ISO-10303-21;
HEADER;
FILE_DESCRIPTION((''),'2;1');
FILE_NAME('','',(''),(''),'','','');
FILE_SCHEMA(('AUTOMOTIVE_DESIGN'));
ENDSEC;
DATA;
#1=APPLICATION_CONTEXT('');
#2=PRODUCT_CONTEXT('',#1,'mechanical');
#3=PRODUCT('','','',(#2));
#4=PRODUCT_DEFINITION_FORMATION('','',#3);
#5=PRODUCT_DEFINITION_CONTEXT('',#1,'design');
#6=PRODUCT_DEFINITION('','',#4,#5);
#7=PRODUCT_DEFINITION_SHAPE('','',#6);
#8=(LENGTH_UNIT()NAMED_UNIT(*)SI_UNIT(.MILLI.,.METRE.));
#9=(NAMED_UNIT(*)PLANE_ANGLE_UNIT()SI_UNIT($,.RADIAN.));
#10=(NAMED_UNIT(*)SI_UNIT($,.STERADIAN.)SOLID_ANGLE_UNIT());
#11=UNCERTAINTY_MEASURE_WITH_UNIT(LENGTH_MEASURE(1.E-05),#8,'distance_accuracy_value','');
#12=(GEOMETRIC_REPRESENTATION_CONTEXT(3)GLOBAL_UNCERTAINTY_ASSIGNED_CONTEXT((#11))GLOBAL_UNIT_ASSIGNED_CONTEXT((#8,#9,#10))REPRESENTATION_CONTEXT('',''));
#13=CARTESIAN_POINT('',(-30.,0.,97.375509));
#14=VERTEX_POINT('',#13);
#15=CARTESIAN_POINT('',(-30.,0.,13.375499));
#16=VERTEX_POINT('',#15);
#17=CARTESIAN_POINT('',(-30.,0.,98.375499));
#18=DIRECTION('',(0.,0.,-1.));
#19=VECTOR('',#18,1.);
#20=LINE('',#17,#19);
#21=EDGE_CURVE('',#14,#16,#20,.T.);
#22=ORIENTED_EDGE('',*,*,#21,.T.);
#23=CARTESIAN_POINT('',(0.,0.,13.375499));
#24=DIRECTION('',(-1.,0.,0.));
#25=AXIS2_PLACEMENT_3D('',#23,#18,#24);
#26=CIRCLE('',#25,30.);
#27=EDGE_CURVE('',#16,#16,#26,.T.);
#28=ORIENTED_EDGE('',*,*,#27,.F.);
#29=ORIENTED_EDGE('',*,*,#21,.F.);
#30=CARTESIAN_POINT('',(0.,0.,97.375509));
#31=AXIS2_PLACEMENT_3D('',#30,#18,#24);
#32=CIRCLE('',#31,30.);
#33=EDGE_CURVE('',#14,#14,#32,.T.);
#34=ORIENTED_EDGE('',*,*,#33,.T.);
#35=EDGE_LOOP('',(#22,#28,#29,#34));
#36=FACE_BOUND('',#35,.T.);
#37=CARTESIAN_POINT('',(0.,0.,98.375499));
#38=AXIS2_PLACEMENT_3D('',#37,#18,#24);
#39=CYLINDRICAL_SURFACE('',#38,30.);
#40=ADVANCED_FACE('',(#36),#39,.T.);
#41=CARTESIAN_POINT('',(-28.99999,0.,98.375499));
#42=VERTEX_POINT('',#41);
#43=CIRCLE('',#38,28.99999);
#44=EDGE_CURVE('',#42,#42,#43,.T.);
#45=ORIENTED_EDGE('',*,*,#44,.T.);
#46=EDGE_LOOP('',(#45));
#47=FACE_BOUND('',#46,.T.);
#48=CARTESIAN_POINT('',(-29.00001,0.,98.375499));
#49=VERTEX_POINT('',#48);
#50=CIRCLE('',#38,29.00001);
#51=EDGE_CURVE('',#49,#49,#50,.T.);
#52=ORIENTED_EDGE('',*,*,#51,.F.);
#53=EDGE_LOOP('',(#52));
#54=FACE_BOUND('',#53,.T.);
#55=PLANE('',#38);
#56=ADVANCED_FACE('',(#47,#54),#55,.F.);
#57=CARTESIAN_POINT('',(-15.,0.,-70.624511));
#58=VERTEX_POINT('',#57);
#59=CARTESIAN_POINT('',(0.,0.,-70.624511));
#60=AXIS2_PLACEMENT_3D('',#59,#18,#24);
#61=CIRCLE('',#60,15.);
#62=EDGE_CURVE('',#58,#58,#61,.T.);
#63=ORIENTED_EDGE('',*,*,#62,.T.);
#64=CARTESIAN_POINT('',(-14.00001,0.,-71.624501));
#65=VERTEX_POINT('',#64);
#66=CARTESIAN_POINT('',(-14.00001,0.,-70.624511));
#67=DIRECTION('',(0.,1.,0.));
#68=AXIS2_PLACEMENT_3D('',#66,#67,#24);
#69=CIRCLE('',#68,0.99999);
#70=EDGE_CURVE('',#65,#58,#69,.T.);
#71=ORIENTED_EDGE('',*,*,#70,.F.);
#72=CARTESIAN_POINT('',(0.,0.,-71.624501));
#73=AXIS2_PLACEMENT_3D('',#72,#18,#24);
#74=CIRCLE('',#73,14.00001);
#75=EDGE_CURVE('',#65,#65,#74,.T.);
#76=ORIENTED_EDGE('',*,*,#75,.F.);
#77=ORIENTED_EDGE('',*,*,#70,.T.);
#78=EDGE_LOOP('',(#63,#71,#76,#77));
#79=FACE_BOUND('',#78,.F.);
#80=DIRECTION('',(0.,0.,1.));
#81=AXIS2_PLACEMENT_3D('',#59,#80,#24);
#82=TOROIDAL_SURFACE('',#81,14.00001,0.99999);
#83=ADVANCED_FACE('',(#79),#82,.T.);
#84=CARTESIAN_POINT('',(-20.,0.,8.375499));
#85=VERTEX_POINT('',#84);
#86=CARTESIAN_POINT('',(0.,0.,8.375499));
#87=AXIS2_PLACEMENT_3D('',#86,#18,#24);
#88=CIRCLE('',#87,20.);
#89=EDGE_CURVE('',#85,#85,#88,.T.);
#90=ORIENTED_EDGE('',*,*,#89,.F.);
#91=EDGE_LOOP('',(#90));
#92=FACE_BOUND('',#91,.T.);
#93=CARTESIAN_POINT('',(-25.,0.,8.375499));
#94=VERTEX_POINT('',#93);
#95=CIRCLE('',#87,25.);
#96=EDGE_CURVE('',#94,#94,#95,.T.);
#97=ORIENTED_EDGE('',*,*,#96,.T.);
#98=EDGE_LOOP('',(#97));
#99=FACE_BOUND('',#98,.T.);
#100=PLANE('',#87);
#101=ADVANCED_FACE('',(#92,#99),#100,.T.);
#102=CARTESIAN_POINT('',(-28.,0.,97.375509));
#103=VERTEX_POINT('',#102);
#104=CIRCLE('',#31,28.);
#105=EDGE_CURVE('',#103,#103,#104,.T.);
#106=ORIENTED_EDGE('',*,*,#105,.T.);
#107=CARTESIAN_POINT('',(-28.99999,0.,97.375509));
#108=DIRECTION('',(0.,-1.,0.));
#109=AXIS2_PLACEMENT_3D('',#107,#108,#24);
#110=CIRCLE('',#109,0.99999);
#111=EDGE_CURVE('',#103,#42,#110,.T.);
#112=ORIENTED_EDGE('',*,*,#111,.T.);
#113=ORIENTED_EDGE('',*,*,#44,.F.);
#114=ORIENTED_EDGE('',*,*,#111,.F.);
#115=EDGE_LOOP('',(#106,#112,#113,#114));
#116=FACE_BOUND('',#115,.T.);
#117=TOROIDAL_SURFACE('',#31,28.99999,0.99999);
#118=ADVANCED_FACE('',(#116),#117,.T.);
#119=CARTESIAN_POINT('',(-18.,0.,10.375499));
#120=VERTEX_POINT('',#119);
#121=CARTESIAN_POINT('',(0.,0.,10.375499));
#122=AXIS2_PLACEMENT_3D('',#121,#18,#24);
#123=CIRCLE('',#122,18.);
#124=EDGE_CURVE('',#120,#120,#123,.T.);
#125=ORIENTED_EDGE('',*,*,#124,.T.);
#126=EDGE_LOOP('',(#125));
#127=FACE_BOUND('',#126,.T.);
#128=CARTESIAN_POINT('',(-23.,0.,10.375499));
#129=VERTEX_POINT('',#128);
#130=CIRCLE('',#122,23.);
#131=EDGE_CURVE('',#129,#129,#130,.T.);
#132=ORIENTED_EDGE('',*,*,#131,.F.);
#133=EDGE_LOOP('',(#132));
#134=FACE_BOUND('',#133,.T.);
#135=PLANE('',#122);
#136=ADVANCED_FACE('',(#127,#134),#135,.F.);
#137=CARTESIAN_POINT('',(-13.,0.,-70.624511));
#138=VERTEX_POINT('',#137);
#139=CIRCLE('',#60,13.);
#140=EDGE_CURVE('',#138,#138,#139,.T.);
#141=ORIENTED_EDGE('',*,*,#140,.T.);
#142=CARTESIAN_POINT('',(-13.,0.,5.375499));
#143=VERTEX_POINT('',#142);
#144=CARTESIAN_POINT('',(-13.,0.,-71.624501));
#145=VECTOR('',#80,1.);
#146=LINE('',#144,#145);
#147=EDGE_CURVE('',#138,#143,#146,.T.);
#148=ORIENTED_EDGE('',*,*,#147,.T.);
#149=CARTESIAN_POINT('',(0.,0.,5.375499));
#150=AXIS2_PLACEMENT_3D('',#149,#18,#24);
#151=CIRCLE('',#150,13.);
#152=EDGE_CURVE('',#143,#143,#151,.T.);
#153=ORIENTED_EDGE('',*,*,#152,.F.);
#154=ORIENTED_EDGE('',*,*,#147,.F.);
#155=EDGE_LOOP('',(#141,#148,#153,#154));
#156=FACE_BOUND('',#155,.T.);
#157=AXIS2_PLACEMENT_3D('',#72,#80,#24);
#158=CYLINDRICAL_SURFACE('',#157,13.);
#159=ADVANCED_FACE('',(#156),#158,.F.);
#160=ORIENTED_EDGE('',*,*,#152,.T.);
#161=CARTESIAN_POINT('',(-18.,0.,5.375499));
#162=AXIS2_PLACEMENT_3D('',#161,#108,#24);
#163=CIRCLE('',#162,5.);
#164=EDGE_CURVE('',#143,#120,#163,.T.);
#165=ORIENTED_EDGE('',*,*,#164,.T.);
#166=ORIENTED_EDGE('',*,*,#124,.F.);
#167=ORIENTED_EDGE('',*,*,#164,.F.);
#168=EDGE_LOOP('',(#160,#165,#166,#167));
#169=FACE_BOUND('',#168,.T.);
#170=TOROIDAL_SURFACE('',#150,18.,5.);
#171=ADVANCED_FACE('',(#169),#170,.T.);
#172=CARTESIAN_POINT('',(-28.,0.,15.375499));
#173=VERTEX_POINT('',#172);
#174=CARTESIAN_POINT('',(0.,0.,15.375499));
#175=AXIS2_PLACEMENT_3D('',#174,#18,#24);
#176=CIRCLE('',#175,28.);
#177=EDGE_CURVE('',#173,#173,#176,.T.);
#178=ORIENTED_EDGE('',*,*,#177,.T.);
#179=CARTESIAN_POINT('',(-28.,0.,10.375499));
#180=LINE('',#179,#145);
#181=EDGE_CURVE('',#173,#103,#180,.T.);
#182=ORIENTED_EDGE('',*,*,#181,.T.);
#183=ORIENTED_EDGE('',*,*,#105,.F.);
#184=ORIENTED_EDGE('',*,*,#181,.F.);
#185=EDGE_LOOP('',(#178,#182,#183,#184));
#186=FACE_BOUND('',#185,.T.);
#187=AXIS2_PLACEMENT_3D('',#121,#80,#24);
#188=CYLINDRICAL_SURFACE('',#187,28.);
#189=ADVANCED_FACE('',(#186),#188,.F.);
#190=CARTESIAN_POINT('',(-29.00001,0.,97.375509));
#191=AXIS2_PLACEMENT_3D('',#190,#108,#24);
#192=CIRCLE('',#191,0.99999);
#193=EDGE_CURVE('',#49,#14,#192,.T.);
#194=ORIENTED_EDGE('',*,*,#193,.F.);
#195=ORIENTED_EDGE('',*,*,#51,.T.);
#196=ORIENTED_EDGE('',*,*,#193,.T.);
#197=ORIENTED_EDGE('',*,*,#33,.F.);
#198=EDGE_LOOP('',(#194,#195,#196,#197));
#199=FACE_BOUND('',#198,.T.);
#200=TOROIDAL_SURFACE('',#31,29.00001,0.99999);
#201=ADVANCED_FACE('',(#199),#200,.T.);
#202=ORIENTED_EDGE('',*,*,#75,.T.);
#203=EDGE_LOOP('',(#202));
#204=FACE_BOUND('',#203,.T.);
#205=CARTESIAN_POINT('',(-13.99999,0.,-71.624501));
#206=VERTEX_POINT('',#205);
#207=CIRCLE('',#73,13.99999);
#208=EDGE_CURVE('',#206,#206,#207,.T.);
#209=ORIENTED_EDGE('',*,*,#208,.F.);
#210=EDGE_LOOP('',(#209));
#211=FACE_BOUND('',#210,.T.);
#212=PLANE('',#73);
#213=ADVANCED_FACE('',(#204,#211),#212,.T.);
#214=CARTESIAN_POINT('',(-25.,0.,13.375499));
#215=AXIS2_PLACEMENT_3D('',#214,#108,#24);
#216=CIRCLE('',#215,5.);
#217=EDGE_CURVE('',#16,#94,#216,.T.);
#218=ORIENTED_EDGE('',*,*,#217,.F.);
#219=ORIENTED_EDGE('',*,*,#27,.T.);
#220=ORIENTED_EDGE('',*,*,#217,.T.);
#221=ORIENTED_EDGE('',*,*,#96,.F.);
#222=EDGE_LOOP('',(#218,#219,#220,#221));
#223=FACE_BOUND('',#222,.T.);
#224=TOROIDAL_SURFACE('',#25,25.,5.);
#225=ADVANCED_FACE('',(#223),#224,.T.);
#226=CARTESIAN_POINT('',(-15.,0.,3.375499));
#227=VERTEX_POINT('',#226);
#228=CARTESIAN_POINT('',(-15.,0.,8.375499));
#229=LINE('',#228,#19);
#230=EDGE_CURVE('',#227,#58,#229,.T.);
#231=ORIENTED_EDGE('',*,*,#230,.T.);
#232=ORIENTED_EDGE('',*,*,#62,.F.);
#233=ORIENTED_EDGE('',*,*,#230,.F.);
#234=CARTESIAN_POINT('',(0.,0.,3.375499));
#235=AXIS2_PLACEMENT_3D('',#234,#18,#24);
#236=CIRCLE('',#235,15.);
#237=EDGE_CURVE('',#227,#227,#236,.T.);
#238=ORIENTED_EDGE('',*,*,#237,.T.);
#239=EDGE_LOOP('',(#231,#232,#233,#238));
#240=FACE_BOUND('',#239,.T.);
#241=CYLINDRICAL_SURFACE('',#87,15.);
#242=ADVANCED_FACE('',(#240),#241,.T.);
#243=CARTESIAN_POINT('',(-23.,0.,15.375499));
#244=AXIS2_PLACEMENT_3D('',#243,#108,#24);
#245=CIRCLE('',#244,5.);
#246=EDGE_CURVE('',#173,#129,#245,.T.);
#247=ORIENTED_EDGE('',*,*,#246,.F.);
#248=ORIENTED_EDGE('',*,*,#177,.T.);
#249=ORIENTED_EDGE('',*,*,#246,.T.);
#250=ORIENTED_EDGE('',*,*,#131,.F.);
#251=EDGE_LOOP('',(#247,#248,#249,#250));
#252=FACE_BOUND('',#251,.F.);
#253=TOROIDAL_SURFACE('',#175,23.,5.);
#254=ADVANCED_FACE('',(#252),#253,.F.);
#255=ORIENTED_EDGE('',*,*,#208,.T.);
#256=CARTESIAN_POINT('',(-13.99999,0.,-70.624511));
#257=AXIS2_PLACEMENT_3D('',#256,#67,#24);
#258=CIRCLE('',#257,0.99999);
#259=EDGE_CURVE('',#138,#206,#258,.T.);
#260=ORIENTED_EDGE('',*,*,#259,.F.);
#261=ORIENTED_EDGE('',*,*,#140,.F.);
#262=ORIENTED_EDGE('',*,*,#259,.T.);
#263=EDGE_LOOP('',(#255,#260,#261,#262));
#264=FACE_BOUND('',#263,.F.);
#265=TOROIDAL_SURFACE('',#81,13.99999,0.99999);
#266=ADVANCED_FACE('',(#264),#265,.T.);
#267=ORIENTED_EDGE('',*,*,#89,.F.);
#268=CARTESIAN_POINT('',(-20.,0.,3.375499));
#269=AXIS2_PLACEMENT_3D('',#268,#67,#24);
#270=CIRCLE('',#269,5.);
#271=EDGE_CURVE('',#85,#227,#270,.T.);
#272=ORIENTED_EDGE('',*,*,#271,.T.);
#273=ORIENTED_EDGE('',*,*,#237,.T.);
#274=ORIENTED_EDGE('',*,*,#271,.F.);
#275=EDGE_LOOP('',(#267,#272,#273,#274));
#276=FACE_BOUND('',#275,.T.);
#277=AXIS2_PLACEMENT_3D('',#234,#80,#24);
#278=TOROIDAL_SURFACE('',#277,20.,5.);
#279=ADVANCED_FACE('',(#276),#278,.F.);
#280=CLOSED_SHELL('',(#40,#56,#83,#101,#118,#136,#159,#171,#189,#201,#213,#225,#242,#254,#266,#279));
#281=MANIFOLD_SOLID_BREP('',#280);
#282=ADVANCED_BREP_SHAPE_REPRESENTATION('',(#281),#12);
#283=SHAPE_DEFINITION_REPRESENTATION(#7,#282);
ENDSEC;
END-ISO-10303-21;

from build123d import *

# Parameters (mm, degrees)
F2_R = 5
F3_R = 0.99999


# Not quite as in the source:
# - a fillet or chamfer is up to 0.001 mm smaller than in the source, because OpenCascade refuses the exact size


with BuildPart() as f1:
    # F0 (on Front) → F1 (revolve)
    with BuildSketch(Plane.XZ):
        Polygon((-28, 10.3754994379), (-28, 98.3754994379), (-30, 98.3754994379), (-30, 8.3754994379), (-15, 8.3754994379), (-15, -71.6245005621), (-13, -71.6245005621), (-13, 10.3754994379), align=None)
    revolve(axis=Axis((0, 0, 13.3754994379), (0, 0, -1)))

    # F2
    f2_edges = [f1.edges().sort_by_distance(p)[0] for p in [
        (30, 0, 8.375499),
        (15, 0, 8.375499),
        (28, 0, 10.375499),
        (13, 0, 10.375499),
    ]]
    fillet(f2_edges, radius=F2_R)

    # F3 (radius 1 in the source; OpenCascade refuses exactly that, so slightly less here)
    f3_edges = [f1.edges().sort_by_distance(p)[0] for p in [
        (28, 0, 98.375499),
        (30, 0, 98.375499),
        (15, 0, -71.624501),
        (13, 0, -71.624501),
    ]]
    fillet(f3_edges, radius=F3_R)


solid = f1.part
